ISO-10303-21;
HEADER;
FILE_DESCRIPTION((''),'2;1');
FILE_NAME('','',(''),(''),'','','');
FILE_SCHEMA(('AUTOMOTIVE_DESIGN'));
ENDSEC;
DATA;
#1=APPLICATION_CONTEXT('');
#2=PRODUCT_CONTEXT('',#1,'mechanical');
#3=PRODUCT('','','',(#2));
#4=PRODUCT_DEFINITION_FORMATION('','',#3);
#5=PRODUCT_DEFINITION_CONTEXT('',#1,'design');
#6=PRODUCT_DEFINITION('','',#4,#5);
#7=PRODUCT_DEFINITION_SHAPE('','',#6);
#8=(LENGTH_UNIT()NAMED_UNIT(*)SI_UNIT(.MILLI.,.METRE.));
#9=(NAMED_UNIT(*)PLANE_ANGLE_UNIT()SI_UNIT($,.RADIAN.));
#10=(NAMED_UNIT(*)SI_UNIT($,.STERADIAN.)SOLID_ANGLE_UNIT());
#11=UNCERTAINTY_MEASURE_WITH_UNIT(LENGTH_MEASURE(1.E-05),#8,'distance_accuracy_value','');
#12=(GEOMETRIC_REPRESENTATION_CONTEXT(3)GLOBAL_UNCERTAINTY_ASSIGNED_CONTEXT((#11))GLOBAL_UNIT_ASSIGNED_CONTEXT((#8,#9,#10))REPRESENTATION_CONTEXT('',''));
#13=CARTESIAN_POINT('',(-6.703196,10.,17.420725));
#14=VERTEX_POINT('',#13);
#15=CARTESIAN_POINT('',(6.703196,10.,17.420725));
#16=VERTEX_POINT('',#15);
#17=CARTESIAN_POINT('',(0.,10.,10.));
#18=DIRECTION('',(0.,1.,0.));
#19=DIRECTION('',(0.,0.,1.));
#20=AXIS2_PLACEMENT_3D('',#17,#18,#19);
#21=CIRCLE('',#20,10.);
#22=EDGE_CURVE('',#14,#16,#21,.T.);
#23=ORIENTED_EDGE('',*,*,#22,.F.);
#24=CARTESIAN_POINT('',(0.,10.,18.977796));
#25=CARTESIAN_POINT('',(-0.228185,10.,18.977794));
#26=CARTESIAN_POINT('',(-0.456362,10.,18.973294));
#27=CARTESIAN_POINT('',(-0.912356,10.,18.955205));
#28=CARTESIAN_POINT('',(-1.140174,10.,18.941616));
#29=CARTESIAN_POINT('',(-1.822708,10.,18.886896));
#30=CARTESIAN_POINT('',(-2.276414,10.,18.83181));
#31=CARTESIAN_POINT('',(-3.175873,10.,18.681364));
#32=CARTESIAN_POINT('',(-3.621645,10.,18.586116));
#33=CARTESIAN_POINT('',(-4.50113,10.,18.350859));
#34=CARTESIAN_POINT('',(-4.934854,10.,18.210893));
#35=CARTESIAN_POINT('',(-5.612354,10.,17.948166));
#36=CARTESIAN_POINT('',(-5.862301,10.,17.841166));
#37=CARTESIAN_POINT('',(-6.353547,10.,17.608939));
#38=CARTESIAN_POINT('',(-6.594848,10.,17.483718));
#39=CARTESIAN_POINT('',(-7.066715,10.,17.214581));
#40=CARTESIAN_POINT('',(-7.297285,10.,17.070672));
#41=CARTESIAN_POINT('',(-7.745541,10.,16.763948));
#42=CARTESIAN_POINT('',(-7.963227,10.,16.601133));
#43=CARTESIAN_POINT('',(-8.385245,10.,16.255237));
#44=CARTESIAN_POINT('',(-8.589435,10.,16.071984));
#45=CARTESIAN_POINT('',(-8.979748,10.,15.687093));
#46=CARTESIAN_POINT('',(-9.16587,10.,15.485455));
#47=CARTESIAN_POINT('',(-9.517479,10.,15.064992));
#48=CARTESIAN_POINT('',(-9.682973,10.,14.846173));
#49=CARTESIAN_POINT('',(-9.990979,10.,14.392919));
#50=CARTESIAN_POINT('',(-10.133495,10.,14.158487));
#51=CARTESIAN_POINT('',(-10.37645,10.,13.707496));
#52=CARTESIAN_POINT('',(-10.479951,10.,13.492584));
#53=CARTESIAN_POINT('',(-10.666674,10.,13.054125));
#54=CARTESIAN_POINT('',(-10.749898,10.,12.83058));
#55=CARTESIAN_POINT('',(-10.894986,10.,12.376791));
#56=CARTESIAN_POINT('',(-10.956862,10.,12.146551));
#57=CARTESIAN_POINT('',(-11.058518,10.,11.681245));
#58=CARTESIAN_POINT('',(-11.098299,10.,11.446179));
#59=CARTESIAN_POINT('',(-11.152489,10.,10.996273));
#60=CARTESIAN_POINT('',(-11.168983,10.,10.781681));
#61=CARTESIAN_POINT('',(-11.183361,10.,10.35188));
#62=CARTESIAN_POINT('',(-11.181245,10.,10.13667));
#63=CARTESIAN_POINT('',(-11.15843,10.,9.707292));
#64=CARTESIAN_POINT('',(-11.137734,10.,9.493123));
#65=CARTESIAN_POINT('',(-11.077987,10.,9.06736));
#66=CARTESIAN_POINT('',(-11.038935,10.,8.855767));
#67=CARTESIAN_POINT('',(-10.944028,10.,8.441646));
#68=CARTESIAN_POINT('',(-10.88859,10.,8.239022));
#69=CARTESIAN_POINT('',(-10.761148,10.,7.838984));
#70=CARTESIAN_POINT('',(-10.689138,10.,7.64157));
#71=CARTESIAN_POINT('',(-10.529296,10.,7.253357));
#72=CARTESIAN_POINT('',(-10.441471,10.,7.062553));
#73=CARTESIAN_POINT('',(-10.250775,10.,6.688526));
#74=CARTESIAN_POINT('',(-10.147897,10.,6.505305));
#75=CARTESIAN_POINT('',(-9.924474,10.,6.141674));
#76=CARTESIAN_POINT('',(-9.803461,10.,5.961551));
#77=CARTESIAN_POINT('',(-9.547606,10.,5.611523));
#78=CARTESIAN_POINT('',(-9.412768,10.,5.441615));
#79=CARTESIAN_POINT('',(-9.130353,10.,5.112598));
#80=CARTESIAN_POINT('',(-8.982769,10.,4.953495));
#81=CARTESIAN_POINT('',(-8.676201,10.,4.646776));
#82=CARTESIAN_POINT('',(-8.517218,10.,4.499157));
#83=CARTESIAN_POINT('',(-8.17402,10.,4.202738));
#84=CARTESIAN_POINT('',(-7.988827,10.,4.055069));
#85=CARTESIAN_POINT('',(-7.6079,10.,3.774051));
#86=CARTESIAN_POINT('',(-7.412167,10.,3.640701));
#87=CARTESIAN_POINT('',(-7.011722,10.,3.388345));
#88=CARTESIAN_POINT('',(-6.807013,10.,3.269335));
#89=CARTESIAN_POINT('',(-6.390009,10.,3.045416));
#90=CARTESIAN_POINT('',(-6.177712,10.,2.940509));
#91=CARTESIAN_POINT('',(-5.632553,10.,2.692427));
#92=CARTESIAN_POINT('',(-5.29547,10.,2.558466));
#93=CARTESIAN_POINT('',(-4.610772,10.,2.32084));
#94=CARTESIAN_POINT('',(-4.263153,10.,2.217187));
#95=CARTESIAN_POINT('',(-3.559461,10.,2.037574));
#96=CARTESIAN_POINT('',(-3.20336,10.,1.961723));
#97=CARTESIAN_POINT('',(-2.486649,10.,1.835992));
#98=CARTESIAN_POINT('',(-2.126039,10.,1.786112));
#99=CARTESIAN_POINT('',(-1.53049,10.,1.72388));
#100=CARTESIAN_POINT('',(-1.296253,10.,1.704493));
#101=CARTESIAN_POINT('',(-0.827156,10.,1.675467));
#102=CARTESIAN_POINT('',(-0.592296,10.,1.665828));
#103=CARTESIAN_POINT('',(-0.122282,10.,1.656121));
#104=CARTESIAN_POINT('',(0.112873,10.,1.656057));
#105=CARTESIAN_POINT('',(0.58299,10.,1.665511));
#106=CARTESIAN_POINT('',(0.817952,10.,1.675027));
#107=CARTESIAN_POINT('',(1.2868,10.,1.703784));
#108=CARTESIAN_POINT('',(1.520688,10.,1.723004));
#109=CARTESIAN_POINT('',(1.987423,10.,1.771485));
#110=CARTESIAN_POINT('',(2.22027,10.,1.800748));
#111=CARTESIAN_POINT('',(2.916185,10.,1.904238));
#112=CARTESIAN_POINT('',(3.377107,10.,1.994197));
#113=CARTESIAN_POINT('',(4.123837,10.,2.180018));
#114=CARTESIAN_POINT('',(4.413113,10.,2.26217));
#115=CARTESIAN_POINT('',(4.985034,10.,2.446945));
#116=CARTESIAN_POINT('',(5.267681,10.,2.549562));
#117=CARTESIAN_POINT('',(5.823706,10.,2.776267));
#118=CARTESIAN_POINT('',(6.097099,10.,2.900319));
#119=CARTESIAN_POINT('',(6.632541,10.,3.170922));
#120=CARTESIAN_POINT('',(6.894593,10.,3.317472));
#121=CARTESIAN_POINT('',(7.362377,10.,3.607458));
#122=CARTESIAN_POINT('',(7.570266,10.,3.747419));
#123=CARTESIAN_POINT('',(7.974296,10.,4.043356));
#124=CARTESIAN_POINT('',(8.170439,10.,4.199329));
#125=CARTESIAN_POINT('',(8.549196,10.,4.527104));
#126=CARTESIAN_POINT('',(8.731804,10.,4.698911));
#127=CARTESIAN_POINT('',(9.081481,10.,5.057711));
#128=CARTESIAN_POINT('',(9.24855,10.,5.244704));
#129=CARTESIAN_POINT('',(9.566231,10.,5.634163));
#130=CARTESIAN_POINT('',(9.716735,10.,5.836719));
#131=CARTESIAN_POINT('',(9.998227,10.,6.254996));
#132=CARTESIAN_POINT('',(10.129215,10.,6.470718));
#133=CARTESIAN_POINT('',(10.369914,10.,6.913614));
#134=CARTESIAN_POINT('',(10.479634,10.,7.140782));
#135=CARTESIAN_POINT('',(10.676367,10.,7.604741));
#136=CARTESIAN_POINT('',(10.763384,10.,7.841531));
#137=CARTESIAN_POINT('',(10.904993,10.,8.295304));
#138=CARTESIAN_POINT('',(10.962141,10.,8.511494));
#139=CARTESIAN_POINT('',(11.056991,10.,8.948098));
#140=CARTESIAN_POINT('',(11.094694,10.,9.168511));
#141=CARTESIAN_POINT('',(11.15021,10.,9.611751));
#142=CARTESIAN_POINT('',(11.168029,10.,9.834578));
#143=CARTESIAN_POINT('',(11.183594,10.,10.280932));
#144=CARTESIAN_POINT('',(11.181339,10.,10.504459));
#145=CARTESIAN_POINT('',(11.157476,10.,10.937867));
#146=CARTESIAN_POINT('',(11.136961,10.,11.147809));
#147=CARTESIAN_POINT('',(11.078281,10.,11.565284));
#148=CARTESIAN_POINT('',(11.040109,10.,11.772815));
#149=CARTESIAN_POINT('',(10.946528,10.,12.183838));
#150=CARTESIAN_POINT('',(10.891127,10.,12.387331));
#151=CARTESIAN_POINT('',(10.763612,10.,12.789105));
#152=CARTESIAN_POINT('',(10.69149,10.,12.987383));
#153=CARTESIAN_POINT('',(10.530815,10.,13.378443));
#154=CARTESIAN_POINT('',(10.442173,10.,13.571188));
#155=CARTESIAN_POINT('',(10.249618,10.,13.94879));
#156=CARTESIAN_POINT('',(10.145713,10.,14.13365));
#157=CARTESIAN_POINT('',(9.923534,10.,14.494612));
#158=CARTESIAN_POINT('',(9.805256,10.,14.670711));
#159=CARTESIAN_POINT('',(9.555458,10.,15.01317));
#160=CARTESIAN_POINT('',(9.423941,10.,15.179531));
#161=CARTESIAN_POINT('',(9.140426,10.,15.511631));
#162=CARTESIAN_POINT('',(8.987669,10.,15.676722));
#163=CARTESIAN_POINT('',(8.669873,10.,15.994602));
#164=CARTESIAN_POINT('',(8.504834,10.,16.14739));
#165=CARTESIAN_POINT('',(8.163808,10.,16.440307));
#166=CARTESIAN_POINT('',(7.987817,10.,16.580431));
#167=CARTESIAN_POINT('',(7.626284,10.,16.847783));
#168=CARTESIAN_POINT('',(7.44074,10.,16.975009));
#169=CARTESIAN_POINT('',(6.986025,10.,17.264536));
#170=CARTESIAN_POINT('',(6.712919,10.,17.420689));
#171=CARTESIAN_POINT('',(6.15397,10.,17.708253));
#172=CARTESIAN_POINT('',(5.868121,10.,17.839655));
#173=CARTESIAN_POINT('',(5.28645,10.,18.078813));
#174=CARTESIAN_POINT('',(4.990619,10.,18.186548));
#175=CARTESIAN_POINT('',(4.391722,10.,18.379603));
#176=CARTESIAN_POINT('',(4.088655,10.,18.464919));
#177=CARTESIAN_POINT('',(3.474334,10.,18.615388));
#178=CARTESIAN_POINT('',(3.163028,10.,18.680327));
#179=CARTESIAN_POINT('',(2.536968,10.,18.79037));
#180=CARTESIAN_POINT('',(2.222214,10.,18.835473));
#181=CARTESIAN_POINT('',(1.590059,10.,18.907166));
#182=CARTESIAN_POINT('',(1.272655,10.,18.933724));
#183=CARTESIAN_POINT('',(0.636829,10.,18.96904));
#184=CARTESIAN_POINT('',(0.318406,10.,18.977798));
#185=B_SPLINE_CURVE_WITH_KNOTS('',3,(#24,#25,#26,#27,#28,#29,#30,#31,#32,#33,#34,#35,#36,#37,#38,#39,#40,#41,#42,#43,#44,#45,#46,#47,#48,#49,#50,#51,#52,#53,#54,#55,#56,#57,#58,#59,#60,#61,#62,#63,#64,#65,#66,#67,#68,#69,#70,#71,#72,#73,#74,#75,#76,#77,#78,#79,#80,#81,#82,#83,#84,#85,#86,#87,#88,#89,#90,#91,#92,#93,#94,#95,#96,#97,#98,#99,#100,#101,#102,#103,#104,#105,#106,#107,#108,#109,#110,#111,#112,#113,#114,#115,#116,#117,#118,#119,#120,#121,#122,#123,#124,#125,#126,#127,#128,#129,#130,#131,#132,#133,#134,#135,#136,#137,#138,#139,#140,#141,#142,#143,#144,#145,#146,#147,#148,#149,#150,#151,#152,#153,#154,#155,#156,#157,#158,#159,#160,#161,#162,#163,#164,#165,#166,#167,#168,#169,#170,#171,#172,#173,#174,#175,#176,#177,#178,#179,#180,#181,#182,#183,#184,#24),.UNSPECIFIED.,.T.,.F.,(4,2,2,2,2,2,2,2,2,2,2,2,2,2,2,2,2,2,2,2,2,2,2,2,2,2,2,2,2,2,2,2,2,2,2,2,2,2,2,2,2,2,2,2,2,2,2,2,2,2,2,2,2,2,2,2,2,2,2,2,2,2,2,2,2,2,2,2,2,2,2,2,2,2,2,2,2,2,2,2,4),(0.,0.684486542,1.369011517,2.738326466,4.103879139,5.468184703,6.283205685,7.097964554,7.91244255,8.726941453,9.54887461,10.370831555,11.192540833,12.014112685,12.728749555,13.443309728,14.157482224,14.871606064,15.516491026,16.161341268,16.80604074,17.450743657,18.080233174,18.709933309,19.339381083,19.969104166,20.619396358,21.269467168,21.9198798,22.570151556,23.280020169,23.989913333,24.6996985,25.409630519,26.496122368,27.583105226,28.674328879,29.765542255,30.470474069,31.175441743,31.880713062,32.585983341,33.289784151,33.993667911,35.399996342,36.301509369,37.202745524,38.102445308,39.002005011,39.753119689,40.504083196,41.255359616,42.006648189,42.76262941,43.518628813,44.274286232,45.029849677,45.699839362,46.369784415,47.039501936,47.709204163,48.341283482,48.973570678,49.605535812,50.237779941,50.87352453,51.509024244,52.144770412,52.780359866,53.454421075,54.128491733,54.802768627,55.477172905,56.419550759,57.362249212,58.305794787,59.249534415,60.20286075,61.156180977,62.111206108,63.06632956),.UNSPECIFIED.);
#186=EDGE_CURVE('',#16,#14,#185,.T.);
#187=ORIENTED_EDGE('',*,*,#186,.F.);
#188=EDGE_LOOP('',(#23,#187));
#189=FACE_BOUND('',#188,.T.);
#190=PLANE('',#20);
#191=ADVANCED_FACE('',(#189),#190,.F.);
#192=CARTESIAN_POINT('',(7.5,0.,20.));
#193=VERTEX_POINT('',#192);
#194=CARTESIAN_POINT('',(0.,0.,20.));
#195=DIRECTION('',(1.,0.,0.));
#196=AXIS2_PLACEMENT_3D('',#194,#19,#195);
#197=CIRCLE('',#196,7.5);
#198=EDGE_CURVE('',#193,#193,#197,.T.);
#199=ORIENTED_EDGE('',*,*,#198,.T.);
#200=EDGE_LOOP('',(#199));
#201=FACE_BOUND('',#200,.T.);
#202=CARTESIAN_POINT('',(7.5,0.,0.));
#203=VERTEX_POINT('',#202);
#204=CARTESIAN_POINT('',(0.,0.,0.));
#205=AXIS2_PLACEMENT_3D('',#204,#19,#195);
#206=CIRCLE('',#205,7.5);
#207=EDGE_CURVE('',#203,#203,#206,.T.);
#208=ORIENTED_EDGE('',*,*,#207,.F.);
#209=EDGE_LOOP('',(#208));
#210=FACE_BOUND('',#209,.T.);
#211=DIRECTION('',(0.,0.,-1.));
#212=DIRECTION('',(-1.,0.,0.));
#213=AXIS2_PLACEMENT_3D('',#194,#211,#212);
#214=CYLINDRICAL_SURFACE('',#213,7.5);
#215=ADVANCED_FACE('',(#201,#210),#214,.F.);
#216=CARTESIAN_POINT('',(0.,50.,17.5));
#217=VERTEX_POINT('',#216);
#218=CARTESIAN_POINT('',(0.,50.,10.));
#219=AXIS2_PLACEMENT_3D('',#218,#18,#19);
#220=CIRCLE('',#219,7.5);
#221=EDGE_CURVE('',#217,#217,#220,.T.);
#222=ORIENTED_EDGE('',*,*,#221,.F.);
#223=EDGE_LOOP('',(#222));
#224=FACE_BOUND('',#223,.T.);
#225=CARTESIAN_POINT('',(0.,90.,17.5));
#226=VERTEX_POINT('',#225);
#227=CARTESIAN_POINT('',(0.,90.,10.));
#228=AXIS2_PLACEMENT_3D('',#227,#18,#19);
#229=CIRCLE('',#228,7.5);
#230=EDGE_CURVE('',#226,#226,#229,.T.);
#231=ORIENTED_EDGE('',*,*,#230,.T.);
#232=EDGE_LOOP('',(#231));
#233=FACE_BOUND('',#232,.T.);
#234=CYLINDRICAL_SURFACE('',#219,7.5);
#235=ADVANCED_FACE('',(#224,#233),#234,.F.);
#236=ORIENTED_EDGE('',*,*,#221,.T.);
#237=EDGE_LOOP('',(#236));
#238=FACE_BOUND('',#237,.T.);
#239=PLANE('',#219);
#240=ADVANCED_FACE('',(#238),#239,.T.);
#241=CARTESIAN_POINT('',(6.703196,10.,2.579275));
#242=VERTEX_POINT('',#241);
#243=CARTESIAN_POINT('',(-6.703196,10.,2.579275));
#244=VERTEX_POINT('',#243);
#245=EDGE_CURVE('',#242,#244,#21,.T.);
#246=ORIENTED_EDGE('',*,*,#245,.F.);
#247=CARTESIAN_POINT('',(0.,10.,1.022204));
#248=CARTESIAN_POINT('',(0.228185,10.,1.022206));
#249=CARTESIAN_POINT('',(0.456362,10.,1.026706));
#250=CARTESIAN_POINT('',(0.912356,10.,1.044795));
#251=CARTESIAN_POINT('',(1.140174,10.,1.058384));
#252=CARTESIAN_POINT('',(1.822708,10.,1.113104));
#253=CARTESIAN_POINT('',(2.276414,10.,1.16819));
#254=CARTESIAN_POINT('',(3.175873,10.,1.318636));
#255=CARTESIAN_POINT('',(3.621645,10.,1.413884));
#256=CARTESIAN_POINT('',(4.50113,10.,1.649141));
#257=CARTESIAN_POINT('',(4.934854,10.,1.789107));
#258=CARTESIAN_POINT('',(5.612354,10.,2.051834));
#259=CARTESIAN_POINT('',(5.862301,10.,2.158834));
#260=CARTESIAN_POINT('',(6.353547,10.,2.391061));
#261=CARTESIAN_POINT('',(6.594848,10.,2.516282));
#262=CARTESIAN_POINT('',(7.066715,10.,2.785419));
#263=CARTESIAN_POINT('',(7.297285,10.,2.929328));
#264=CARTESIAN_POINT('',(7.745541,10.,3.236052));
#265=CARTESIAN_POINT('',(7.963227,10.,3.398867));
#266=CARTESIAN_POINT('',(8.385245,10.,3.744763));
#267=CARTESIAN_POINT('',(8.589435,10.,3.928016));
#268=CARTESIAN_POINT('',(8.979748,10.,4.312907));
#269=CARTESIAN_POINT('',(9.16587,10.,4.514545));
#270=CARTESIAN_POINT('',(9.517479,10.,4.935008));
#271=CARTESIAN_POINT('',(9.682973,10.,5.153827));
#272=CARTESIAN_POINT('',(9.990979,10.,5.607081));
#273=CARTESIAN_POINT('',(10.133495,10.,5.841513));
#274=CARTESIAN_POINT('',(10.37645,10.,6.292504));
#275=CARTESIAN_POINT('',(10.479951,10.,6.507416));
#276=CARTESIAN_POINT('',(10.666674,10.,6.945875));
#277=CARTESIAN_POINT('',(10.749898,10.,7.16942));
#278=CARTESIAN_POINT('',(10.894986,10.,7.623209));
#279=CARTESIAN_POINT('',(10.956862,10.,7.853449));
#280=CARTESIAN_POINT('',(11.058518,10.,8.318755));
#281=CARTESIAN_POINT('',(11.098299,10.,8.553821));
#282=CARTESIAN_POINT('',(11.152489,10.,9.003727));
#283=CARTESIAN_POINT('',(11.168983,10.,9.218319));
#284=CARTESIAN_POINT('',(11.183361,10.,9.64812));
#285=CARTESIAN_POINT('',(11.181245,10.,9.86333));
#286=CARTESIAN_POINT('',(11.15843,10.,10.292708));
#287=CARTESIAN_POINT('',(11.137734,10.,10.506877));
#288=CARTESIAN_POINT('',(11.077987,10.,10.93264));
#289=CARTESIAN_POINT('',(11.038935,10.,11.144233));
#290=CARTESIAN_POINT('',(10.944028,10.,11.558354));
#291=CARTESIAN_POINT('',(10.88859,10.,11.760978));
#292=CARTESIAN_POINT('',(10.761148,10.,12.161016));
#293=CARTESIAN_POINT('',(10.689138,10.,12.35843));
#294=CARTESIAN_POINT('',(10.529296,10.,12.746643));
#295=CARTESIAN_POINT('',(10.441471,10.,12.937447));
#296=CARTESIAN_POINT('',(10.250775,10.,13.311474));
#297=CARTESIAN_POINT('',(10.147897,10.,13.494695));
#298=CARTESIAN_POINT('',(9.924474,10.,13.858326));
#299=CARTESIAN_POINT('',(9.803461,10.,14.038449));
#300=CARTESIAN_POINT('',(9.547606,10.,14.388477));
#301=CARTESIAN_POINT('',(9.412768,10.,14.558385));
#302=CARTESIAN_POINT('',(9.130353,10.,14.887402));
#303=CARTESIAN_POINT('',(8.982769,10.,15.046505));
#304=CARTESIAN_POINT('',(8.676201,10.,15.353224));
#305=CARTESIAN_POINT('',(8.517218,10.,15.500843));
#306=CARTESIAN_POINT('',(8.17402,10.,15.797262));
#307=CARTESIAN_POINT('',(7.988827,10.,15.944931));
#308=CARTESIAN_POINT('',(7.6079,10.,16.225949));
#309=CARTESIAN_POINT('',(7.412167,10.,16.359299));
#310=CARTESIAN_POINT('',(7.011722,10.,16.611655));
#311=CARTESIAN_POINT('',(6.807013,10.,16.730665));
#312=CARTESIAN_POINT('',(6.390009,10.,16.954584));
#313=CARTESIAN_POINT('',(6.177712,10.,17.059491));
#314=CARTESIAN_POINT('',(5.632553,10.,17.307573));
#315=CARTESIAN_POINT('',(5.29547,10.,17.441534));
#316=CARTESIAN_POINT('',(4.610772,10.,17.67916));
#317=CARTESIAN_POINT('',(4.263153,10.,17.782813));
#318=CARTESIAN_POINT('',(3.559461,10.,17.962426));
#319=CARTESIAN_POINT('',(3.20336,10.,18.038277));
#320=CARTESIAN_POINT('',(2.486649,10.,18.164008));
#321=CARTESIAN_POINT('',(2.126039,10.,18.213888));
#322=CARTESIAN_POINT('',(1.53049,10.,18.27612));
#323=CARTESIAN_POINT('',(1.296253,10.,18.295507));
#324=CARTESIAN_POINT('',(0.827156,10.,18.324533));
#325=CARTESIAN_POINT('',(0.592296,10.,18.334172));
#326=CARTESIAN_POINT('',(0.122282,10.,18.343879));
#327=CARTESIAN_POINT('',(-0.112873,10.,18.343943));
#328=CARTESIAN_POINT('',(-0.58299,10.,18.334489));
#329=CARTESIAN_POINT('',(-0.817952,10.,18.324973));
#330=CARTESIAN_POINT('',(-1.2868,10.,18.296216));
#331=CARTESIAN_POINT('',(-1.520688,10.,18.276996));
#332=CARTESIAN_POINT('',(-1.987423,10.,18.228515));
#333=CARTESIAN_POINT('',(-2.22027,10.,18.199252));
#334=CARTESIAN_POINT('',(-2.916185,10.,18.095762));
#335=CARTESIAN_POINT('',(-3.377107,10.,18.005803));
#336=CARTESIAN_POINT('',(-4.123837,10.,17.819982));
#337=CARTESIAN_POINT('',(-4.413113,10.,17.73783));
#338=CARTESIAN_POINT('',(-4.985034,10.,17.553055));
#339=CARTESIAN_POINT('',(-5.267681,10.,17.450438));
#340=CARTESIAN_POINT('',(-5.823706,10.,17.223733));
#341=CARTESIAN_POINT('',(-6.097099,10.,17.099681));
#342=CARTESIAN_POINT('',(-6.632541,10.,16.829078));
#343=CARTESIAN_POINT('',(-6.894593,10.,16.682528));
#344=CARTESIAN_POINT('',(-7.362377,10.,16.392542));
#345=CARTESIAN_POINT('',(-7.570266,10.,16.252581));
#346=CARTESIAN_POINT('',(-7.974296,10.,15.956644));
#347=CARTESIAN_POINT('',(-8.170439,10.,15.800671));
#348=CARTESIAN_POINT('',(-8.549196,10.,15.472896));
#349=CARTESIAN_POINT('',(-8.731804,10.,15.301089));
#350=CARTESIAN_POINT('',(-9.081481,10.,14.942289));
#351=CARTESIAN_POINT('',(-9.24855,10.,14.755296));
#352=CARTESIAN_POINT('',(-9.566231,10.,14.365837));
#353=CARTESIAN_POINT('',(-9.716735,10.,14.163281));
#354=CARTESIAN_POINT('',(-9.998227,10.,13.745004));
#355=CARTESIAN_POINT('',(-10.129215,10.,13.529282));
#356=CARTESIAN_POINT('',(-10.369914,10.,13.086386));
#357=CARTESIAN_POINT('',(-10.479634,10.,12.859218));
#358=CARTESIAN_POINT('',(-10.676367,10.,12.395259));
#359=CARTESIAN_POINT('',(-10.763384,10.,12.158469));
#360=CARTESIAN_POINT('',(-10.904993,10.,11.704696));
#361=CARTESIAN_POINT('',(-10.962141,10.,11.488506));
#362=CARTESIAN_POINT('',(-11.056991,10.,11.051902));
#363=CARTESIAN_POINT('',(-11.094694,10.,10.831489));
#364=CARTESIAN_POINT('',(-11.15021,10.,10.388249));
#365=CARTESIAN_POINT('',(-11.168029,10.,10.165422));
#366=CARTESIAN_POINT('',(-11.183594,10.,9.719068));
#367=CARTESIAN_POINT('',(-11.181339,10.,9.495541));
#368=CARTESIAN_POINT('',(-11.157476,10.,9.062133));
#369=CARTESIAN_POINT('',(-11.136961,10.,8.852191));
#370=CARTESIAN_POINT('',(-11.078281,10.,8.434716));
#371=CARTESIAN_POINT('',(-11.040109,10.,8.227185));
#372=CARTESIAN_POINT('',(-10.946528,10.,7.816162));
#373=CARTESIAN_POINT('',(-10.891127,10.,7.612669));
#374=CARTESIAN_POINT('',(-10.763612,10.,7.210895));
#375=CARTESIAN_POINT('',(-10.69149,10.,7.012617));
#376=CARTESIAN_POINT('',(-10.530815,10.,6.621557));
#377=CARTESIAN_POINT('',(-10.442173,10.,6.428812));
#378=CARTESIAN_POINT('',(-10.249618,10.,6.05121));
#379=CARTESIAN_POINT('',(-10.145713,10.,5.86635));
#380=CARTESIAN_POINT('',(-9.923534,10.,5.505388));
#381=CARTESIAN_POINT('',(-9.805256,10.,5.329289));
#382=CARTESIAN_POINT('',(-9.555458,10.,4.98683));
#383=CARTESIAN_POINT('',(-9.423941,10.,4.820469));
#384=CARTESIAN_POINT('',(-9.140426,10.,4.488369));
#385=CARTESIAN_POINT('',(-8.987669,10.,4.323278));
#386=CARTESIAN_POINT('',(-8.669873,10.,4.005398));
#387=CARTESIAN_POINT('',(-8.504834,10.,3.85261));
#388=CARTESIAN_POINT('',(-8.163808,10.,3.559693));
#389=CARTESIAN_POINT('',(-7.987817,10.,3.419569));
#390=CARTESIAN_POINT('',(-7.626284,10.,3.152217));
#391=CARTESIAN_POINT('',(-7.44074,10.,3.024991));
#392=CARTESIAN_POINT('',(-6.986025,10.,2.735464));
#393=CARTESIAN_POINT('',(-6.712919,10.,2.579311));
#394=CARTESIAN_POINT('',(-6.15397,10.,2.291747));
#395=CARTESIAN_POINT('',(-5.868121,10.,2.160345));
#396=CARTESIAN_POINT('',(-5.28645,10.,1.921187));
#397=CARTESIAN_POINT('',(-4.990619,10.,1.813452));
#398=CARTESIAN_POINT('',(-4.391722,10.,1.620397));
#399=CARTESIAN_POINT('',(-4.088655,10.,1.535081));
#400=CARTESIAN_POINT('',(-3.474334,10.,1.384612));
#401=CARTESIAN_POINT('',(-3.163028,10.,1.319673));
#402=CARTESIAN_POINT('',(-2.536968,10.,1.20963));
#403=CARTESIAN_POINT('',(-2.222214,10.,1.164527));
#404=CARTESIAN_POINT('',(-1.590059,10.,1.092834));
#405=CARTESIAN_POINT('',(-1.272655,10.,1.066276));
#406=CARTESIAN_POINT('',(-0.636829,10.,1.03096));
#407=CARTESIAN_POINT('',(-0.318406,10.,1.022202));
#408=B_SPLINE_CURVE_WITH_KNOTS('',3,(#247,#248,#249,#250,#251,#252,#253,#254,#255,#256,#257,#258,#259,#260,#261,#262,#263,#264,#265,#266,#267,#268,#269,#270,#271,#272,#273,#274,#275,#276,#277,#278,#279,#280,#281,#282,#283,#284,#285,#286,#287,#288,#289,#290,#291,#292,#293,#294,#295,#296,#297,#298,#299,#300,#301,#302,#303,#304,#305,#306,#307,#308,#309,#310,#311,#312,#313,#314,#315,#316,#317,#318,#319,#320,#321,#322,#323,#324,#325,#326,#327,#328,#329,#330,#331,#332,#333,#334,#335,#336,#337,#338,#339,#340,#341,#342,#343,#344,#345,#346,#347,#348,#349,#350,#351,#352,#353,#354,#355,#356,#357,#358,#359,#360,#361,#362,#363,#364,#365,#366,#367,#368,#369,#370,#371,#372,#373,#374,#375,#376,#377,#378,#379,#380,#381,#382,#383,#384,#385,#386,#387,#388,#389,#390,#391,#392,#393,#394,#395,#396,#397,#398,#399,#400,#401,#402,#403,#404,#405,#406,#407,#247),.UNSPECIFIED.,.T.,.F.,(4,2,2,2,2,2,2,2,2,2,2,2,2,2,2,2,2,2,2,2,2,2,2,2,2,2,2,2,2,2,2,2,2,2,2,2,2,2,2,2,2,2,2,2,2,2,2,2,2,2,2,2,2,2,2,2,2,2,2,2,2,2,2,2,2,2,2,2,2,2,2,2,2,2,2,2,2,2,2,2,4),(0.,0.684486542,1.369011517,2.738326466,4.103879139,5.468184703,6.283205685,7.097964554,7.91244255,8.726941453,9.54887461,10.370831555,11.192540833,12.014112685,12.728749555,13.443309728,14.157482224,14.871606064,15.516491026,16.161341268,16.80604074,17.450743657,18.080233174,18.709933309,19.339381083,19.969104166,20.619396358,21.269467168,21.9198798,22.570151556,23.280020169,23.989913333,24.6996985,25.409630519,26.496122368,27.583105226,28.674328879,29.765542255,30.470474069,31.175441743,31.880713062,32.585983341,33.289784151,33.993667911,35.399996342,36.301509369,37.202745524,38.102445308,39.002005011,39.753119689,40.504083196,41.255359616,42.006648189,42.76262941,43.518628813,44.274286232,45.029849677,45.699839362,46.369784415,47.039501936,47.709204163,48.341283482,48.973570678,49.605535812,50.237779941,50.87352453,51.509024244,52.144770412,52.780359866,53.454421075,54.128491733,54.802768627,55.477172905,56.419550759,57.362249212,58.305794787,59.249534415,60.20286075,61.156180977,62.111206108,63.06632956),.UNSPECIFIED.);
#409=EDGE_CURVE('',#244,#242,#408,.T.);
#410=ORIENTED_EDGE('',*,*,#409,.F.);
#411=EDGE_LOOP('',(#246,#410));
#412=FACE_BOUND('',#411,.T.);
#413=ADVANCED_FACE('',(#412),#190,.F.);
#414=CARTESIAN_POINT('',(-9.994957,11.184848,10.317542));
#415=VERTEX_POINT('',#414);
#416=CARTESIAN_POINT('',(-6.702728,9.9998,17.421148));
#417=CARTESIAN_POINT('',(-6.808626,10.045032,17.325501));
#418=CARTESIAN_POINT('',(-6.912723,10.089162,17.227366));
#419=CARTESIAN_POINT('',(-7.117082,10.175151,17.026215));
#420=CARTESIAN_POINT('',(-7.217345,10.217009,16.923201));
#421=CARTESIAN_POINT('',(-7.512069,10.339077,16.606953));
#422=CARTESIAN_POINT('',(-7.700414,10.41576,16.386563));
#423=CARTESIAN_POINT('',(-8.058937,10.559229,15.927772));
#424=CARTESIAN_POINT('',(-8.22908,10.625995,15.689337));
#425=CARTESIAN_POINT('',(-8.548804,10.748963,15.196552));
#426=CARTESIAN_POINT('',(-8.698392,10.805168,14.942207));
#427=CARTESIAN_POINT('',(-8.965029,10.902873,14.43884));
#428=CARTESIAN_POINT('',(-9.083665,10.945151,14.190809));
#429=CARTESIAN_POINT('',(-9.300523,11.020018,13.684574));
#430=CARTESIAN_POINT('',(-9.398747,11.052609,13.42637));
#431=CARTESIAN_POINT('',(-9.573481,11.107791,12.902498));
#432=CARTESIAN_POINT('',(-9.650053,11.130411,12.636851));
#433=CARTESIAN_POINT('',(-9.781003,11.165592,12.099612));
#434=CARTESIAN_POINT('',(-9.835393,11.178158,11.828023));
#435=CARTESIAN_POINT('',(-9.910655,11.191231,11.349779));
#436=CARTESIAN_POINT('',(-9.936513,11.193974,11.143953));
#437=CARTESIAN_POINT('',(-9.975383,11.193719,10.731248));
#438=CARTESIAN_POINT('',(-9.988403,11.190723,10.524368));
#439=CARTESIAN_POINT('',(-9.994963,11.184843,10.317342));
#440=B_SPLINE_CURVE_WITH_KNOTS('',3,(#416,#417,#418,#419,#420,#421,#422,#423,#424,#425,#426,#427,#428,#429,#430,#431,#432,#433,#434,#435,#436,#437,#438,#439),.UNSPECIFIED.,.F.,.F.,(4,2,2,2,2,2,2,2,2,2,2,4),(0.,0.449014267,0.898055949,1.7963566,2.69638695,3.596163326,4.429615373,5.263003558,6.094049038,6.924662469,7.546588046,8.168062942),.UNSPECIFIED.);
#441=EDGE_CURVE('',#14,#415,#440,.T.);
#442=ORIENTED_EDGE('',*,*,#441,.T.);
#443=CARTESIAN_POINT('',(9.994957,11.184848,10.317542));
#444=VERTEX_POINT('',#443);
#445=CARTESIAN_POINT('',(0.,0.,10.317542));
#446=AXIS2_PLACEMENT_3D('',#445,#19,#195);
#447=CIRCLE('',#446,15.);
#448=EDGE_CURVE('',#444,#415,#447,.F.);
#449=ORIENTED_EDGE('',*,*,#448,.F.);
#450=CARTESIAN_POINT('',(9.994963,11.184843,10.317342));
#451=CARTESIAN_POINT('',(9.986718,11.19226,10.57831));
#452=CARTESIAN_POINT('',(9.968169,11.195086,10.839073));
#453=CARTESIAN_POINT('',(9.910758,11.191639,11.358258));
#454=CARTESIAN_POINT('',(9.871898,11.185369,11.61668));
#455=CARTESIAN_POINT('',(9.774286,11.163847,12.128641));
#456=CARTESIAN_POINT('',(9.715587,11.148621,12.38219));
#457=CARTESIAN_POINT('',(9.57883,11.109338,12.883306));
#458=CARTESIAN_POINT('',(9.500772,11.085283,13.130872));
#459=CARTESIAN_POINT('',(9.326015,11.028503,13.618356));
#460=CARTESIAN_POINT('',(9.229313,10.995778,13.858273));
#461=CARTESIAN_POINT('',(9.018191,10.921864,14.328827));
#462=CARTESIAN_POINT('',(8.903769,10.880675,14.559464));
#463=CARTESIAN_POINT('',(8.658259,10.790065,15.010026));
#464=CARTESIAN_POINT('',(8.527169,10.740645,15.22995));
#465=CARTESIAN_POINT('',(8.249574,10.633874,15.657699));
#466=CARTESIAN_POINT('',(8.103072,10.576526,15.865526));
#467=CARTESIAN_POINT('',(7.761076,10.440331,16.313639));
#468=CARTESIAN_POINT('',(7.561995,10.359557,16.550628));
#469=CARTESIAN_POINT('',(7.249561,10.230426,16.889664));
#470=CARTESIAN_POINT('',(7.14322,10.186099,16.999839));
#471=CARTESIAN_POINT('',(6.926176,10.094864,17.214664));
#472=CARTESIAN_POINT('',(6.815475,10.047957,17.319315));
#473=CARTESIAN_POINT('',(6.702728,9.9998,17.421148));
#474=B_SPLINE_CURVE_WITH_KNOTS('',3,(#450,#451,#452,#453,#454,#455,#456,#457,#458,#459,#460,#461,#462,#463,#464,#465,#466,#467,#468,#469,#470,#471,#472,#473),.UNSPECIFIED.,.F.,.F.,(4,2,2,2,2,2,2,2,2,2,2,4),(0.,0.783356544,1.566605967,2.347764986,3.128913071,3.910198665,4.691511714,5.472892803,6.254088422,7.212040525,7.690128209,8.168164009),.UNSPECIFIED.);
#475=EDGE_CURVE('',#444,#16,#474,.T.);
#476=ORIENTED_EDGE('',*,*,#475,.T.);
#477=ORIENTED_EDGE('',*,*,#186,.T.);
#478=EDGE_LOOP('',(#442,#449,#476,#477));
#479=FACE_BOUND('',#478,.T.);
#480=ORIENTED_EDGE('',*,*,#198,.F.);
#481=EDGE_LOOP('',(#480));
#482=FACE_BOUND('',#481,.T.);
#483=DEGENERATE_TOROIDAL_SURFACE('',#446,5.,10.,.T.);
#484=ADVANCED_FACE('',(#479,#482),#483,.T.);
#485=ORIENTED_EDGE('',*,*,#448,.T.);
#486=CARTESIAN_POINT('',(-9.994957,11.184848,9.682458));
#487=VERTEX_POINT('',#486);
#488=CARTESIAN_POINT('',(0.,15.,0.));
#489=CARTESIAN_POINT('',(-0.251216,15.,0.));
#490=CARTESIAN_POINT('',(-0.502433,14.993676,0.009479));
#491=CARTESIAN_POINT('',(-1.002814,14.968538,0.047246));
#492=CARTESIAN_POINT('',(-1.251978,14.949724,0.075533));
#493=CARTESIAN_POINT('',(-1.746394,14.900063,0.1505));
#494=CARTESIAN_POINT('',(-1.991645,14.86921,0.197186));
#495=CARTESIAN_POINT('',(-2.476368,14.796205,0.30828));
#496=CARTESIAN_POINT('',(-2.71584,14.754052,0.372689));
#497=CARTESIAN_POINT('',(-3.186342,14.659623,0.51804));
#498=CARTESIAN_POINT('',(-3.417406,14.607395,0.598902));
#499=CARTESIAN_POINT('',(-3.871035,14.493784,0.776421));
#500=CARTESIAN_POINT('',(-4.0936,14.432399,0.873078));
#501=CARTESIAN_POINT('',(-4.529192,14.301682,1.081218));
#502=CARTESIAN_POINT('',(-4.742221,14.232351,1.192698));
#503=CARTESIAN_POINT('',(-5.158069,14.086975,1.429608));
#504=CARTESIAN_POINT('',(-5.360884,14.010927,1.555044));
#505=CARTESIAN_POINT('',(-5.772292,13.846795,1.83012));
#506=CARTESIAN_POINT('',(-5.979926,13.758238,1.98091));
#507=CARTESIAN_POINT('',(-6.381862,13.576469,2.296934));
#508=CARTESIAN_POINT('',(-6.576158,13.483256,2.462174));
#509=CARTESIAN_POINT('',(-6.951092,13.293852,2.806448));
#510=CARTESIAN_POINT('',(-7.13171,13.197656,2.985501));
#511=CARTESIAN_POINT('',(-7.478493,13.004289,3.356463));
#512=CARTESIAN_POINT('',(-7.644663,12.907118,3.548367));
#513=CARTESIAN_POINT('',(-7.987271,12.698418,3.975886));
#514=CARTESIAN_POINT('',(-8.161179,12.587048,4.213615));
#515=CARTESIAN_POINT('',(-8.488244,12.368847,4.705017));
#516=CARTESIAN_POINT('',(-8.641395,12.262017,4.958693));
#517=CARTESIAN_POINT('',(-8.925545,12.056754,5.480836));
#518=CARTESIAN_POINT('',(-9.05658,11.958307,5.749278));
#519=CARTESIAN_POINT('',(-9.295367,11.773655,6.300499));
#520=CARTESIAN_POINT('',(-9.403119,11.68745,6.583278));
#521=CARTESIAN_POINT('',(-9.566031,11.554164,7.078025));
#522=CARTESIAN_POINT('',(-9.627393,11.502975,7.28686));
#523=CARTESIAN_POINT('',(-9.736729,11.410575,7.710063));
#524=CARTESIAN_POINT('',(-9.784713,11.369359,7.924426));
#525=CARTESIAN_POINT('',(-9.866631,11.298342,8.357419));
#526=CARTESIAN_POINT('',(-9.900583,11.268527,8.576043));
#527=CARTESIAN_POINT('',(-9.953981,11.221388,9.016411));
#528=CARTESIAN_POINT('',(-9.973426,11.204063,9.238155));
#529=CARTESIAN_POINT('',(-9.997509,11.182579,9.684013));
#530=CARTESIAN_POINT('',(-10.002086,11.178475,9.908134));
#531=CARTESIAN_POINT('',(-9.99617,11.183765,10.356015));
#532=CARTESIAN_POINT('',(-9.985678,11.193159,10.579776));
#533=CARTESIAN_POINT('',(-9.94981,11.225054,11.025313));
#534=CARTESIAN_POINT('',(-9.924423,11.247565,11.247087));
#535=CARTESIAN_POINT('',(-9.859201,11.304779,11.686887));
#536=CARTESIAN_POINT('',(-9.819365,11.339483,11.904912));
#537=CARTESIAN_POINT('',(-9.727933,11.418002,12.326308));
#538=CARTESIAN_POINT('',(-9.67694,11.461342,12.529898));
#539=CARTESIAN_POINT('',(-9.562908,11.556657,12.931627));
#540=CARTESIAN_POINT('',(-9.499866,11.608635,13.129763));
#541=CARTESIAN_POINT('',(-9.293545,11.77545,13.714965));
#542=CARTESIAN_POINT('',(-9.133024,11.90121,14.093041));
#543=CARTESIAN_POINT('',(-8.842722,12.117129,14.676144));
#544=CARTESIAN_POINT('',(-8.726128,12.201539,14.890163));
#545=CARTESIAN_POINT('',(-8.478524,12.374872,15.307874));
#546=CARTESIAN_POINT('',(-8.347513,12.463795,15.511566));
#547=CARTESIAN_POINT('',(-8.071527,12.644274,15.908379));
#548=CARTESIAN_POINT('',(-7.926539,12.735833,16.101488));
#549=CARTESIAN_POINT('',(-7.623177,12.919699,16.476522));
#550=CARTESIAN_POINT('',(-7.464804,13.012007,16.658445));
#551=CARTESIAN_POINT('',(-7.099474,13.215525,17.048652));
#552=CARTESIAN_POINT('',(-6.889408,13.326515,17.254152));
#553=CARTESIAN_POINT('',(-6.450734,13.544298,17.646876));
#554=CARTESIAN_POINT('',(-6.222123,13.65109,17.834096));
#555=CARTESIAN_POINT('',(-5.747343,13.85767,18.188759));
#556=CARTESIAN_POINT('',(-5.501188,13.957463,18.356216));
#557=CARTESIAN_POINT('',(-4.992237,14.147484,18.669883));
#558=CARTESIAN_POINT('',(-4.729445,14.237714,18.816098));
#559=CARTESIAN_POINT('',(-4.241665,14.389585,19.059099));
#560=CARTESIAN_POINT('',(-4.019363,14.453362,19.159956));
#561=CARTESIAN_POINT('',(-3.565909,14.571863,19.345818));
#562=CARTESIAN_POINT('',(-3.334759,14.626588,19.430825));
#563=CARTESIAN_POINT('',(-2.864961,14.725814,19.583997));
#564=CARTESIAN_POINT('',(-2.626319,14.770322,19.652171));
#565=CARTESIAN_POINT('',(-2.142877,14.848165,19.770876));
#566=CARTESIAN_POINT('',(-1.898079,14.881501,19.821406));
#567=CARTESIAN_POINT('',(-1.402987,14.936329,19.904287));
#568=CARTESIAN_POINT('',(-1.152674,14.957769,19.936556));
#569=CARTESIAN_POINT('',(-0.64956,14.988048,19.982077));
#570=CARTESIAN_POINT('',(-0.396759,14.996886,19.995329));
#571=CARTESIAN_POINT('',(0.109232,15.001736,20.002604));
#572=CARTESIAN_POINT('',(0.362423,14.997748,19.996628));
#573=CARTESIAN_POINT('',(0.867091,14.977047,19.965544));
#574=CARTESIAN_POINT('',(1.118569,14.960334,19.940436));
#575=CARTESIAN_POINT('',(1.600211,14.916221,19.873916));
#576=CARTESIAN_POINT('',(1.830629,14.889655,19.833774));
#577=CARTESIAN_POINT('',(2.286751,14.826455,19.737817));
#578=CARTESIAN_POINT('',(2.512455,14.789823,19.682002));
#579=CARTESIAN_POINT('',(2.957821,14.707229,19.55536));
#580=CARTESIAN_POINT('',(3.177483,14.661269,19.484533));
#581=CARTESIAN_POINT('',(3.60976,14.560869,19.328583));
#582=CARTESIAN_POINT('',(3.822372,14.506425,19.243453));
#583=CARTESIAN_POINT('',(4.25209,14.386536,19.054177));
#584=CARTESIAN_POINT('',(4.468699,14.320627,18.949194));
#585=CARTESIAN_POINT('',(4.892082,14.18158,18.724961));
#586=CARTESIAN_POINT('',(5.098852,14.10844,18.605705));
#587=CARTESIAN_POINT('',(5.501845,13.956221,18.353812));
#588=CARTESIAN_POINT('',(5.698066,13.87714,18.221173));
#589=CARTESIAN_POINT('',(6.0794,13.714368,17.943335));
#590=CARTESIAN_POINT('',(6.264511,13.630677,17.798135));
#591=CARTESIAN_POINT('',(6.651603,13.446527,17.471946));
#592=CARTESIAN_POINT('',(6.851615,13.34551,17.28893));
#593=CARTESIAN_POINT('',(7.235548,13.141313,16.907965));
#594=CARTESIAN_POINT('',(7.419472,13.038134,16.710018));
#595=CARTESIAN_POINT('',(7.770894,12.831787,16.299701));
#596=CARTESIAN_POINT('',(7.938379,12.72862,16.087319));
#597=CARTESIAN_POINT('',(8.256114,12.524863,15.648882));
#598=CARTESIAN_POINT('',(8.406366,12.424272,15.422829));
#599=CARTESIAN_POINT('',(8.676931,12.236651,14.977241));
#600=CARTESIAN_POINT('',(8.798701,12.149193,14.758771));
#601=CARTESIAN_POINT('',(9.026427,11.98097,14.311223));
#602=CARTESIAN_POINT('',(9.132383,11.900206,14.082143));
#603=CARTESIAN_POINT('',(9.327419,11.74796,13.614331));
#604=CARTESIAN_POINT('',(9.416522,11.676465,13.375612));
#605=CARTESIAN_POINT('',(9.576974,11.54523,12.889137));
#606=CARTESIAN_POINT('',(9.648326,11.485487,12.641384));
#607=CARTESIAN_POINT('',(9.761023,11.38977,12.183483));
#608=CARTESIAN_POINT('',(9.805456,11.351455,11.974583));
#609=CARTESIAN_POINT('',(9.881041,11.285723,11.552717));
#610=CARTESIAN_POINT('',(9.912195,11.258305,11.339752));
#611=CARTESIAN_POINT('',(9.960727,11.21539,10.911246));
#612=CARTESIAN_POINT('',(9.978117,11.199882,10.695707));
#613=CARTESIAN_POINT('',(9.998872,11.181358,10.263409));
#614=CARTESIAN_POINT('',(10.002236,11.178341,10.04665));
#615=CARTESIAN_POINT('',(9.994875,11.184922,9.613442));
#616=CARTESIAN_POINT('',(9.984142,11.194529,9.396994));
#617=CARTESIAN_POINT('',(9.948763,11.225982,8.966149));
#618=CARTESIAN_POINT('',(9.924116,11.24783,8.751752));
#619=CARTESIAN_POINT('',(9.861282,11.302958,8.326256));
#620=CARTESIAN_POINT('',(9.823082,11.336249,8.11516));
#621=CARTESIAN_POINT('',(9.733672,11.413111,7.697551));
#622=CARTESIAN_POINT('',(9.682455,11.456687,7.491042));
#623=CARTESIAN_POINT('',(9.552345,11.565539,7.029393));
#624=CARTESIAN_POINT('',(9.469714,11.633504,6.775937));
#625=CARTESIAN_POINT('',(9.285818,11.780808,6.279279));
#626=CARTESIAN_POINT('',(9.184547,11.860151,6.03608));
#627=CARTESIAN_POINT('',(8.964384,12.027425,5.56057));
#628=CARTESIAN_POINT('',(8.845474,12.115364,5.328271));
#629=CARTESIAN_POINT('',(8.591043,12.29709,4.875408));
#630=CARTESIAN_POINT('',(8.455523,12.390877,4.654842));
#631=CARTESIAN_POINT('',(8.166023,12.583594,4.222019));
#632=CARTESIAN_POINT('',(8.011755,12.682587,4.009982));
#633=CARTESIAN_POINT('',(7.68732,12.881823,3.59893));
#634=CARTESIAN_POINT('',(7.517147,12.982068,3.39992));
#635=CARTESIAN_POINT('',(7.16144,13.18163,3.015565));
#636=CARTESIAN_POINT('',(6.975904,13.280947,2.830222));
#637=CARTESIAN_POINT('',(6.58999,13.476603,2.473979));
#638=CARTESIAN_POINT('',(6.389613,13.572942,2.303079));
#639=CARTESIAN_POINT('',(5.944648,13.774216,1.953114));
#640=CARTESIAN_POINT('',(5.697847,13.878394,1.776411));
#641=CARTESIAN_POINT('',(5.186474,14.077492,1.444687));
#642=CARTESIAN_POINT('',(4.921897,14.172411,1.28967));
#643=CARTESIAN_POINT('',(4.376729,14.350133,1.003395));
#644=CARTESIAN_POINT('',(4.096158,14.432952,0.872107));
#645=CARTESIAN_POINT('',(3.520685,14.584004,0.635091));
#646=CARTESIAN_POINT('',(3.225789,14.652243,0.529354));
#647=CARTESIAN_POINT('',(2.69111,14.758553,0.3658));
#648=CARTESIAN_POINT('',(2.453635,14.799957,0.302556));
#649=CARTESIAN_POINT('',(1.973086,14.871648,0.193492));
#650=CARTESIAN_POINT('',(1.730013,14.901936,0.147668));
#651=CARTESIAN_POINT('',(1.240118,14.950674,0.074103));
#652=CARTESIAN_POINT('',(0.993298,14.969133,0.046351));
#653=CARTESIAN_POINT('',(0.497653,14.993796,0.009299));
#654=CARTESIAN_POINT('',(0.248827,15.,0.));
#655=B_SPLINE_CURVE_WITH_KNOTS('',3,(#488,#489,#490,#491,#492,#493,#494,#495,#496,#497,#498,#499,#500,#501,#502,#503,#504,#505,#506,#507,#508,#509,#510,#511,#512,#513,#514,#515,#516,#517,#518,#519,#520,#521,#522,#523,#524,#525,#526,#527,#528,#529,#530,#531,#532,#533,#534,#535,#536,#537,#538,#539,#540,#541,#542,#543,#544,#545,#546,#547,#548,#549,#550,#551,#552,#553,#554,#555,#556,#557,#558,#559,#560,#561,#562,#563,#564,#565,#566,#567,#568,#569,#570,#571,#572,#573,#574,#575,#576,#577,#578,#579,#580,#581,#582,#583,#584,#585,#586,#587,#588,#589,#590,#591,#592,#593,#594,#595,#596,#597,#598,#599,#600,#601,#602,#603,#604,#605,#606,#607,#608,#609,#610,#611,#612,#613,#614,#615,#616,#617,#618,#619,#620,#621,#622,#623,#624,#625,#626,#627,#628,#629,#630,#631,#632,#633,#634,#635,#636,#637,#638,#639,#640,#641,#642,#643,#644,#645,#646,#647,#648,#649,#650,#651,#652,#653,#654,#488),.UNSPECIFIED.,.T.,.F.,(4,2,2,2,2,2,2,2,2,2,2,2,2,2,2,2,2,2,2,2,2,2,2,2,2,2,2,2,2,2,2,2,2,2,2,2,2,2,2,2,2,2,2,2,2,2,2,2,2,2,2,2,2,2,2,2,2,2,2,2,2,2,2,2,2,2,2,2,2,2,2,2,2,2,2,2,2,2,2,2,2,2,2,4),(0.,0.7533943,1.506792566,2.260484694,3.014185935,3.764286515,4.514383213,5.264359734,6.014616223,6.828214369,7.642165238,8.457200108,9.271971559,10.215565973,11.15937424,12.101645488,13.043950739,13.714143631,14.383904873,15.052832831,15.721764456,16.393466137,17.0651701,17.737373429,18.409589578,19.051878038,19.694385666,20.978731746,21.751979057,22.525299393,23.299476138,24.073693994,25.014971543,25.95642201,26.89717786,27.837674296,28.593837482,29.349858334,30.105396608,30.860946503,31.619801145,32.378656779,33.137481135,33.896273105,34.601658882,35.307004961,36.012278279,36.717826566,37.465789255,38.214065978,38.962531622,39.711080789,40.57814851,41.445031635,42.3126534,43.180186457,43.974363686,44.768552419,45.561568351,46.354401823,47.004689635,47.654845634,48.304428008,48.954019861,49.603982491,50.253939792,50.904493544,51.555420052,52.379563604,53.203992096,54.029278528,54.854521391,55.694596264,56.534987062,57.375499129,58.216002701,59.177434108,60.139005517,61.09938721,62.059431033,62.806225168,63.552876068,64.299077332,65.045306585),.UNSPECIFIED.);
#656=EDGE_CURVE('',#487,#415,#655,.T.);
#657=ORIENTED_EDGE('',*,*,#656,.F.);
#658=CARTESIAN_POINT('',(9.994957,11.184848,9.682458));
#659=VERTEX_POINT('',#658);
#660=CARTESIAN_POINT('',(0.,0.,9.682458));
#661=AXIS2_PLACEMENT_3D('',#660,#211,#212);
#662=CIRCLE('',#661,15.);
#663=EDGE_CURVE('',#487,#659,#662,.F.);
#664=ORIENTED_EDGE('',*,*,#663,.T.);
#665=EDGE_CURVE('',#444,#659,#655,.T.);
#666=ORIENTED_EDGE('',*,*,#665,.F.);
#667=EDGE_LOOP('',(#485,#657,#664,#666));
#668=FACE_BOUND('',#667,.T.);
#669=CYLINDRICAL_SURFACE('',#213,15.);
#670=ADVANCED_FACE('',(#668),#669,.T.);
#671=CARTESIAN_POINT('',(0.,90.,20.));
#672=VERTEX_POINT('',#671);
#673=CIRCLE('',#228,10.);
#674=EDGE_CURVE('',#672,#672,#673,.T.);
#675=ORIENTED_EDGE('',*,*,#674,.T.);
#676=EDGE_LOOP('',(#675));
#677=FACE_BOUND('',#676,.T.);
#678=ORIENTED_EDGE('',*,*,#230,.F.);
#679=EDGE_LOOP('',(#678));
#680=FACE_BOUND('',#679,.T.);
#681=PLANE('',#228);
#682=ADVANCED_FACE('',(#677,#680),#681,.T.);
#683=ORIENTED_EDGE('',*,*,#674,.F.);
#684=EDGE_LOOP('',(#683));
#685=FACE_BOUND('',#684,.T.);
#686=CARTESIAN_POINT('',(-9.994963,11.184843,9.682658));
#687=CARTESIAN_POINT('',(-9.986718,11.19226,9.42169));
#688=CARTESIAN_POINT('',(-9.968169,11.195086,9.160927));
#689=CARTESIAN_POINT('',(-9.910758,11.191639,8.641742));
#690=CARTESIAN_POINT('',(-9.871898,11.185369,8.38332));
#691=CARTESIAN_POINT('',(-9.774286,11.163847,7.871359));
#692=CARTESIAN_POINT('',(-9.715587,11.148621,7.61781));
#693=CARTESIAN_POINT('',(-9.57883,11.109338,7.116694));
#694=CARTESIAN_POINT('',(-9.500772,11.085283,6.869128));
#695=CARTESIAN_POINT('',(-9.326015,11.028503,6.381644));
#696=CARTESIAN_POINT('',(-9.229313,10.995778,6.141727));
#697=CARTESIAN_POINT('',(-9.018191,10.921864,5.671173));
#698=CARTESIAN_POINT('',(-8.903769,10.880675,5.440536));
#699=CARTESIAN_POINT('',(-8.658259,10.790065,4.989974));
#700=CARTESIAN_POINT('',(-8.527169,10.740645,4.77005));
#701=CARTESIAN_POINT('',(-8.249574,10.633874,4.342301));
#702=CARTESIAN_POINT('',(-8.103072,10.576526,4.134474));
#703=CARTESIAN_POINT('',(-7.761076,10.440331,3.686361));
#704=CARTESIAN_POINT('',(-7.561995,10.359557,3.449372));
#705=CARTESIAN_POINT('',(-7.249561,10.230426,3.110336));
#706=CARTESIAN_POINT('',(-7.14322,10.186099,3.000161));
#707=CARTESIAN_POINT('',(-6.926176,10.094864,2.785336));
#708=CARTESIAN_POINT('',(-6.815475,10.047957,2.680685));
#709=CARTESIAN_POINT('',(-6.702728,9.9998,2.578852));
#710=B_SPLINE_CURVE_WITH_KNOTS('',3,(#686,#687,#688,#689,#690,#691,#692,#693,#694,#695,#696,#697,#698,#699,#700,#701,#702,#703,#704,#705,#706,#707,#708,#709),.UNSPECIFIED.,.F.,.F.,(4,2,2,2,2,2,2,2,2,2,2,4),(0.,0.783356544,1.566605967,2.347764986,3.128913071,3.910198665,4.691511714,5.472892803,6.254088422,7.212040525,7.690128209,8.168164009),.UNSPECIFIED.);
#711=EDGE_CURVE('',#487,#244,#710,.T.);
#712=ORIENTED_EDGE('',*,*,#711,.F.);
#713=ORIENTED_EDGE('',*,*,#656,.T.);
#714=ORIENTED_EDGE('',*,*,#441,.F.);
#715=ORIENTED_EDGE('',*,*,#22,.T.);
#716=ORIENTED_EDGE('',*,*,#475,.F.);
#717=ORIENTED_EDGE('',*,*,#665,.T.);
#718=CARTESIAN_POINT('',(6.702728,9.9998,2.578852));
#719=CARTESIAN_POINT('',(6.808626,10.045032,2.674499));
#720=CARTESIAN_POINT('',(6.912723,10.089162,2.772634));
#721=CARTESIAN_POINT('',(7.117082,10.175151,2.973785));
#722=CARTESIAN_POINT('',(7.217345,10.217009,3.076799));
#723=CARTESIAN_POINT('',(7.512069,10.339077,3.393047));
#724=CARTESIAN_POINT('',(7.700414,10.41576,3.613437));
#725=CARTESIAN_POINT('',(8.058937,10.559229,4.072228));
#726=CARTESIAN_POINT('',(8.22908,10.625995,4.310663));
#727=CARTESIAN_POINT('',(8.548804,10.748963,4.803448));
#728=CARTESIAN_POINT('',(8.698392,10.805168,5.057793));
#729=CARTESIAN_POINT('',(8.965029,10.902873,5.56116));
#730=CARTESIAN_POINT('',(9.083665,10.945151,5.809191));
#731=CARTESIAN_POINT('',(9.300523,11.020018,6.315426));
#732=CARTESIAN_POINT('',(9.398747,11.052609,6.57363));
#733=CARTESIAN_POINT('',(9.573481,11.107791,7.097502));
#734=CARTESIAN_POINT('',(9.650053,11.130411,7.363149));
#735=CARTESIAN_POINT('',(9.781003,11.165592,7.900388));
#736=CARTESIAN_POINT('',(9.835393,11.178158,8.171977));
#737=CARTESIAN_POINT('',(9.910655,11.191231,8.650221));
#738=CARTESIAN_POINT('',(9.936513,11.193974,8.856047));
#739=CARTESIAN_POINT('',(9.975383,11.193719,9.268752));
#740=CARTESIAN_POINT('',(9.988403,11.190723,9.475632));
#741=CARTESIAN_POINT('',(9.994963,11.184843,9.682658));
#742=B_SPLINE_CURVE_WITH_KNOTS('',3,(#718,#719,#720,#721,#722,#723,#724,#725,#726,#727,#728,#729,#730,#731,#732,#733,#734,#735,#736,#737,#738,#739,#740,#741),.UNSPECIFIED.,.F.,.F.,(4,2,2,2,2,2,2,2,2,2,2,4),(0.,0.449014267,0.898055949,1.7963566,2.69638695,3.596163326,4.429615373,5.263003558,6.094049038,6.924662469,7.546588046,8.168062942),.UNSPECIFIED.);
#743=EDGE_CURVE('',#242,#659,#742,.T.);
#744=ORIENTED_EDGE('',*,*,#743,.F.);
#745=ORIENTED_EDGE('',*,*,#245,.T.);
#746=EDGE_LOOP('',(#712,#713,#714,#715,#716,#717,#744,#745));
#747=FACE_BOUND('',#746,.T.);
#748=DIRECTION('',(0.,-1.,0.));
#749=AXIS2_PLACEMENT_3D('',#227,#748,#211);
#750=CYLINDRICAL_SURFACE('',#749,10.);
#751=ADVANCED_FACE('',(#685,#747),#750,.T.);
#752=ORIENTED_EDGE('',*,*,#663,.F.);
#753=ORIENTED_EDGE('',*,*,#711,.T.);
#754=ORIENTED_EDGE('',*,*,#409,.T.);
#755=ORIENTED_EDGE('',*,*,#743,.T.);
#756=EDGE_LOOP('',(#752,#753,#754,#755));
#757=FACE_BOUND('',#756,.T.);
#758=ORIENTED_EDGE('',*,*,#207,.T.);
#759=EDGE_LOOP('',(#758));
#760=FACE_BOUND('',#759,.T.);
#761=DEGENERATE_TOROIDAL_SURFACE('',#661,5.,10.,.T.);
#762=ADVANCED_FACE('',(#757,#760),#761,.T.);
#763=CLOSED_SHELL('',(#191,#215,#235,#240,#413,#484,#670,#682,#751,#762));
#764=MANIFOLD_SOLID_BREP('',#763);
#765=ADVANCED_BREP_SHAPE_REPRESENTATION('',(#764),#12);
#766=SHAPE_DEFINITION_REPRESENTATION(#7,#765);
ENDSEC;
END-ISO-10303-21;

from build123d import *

# Parameters (mm, degrees)
SKETCH1_R           = 15
SKETCH1_R_2         = 7.5
BOSS_EXTRUDE1_DEPTH = 20
FILLET1_R           = 10
BOSS_EXTRUDE2_START = 10
SKETCH2_R           = 10
BOSS_EXTRUDE2_DEPTH = 80
SKETCH3_R           = 7.5
CUT_EXTRUDE1_DEPTH  = 40


with BuildPart() as part:
    # Sketch1 → Boss-Extrude1 (new body)
    with BuildSketch(Plane.XY):
        Circle(SKETCH1_R)
        Circle(SKETCH1_R_2, mode=Mode.SUBTRACT)
    extrude(amount=BOSS_EXTRUDE1_DEPTH)

    # Fillet1
    # the kernel refuses this fillet: 10 mm, written as the material it takes off along each edge
    with BuildSketch(Plane(origin=(0, 0, 0), x_dir=(1, 0, 0), z_dir=(0, -1, 0))) as fillet1_piece_1:
        with BuildLine():
            CenterArc((5, 9.682458366), FILLET1_R, 284.477512186, 75.522487814)
            Line((7.5, 0), (7.55, -0.193649167))
            ThreePointArc((7.55, -0.193649167), (11.25, -0.2), (15, -0.2))
            Line((15, -0.2), (15.2, 0))
            Line((15.2, 0), (15.2, 9.682458366))
            Line((15.2, 9.682458366), (15, 9.682458366))
        make_face()
    revolve(axis=Axis((0, 0, 0), (0, 0, 1)), mode=Mode.SUBTRACT)
    with BuildSketch(Plane(origin=(0, 0, 20), x_dir=(1, 0, 0), z_dir=(0, -1, 0))) as fillet1_piece_2:
        with BuildLine():
            CenterArc((5, -9.682458366), FILLET1_R, 0, 75.522487814)
            Line((7.5, 0), (7.55, 0.193649167))
            ThreePointArc((7.55, 0.193649167), (11.25, 0.2), (15, 0.2))
            Line((15, 0.2), (15.2, 0))
            Line((15.2, 0), (15.2, -9.682458366))
            Line((15.2, -9.682458366), (15, -9.682458366))
        make_face()
    revolve(axis=Axis((0, 0, 20), (0, 0, 1)), mode=Mode.SUBTRACT)

    # Sketch2 → Boss-Extrude2 (add)
    with BuildSketch(Plane(origin=(0, 0, 0), x_dir=(1, 0, 0), z_dir=(0, 1, 0)).offset(BOSS_EXTRUDE2_START)):
        with Locations(Location((0, -10, 0), (0, 0, 47.908263914))):
            Circle(SKETCH2_R)
    extrude(amount=BOSS_EXTRUDE2_DEPTH)

    # Sketch3 → Cut-Extrude1 (cut)
    with BuildSketch(Plane(origin=(0, 90, 0), x_dir=(1, 0, 0), z_dir=(0, 1, 0))):
        with Locations(Location((0, -10, 0), (0, 0, 270))):
            Circle(SKETCH3_R)
    extrude(amount=-CUT_EXTRUDE1_DEPTH, mode=Mode.SUBTRACT)


solid = part.part
